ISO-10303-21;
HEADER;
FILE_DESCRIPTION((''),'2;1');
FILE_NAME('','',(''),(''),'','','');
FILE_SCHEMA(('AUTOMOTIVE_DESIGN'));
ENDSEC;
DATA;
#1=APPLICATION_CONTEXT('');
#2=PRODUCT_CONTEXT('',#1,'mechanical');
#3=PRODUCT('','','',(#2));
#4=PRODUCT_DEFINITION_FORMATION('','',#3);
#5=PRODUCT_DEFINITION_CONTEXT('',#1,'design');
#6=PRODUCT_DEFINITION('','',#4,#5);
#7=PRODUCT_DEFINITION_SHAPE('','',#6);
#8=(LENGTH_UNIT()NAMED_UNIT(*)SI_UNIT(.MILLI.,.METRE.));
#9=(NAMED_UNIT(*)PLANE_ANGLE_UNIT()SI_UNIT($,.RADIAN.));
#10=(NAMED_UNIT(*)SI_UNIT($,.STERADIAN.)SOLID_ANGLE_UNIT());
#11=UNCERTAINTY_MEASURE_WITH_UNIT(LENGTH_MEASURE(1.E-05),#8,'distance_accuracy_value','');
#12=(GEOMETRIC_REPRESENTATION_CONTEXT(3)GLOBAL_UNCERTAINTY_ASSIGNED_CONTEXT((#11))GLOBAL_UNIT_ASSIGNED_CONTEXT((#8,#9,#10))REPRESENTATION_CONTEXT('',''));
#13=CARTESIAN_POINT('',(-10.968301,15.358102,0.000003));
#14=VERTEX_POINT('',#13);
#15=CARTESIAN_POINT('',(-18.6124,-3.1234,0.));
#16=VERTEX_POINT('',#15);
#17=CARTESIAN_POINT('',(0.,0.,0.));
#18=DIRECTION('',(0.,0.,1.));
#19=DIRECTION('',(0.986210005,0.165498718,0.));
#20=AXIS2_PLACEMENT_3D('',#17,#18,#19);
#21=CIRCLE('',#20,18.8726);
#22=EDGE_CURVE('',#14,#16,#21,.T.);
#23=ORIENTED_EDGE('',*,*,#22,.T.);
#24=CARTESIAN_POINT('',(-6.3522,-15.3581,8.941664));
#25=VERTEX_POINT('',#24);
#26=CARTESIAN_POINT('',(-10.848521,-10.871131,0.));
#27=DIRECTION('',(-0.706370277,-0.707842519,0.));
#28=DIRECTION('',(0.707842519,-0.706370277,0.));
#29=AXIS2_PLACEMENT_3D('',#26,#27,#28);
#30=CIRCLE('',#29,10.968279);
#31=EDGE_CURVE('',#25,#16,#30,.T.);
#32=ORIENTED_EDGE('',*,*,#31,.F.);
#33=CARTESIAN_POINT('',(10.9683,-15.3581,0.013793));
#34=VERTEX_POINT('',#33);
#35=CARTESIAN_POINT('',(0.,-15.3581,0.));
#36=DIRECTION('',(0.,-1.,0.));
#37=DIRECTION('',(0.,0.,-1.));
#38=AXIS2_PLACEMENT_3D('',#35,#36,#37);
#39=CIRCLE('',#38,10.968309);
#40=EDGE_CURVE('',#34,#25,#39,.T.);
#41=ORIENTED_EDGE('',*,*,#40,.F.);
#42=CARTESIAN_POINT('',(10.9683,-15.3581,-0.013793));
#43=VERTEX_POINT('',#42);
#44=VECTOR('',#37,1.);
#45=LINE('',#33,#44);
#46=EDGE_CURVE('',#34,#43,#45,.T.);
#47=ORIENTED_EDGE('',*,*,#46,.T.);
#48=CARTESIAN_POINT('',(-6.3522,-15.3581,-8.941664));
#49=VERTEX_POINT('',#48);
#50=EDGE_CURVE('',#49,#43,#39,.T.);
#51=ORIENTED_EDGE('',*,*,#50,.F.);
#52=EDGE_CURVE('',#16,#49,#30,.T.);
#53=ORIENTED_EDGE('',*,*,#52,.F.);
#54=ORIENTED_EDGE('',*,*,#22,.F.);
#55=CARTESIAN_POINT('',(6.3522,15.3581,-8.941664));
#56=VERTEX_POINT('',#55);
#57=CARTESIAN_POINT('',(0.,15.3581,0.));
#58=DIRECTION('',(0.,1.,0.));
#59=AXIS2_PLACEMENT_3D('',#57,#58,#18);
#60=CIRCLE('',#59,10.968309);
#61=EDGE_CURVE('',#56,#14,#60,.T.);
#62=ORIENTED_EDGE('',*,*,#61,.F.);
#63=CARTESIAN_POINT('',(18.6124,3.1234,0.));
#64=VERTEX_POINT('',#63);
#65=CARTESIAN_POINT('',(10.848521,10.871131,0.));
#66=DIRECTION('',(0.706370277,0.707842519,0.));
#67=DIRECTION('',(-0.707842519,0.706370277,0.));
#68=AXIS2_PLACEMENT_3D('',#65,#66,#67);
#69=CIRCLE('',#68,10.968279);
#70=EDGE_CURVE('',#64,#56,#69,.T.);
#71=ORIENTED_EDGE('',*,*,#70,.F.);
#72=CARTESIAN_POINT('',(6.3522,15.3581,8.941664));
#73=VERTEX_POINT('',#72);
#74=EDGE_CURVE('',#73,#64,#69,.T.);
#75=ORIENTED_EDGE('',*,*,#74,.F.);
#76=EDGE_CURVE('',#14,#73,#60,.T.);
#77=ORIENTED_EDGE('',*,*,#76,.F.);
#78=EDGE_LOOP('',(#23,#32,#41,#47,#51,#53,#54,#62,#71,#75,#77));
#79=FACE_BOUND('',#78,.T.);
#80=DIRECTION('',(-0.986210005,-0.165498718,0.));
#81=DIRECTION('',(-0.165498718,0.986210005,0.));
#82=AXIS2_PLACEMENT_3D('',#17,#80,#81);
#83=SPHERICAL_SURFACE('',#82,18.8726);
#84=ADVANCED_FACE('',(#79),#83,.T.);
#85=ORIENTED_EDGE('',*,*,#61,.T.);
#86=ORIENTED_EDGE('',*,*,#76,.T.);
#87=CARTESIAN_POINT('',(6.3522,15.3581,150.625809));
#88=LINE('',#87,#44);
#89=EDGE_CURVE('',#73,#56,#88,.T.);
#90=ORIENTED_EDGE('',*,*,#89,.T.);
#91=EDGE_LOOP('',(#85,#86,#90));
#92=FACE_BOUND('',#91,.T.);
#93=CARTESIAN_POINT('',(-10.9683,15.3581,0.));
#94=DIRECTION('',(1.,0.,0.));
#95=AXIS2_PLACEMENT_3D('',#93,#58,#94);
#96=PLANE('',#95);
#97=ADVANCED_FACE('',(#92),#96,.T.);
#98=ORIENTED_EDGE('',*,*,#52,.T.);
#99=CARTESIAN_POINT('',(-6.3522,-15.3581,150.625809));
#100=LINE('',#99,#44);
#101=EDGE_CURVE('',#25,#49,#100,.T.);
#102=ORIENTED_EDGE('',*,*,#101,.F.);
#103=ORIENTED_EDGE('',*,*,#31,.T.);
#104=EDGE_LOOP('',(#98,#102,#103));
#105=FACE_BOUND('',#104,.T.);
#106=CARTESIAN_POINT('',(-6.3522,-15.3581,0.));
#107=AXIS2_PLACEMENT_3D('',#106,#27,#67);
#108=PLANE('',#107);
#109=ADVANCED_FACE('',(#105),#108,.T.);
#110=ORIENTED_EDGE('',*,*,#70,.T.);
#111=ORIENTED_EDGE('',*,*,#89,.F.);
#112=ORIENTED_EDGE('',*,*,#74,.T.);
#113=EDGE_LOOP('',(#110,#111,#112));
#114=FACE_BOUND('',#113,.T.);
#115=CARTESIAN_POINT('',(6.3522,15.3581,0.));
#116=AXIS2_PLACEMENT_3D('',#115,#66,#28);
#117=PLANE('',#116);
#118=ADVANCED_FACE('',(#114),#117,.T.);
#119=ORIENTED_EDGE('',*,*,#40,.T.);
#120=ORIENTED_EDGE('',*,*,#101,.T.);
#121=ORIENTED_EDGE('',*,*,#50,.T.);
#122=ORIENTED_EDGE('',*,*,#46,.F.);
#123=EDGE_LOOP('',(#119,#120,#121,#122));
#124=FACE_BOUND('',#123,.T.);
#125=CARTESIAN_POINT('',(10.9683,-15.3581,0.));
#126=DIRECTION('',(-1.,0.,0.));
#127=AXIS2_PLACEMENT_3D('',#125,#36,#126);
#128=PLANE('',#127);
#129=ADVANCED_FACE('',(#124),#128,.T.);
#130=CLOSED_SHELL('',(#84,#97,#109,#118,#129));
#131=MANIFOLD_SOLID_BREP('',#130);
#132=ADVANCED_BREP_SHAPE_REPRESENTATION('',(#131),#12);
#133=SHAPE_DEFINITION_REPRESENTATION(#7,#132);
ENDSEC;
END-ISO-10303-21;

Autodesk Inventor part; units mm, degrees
ref_plane "YZ Plane" through (0, 0, 0) normal (1, 0, 0) x (0, 1, 0)
ref_plane "XZ Plane" through (0, 0, 0) normal (0, 1, 0) x (-1, 0, 0)
ref_plane "XY Plane" through (0, 0, 0) normal (0, 0, 1) x (1, 0, 0)
sketch "Sketch12" plane through (0, 0, 0) normal (0, 0, 1) x (1, 0, 0)
  line L0 (10.9683, -15.3581) -> (-6.3522, -25.3581) construction
  line L1 (-6.3522, -25.3581) -> (-6.3522, -5.3581) construction
  line L2 (-6.3522, -5.3581) -> (10.9683, -15.3581) construction
  circle A0 centre (0, 0) radius 18.8726
  line L3 (-18.6124, -3.1234) -> (-10.9683, 15.3581)
  line L4 (-10.9683, 15.3581) -> (6.3522, 15.3581)
  line L5 (6.3522, 15.3581) -> (18.6124, 3.1234)
  line L6 (10.9683, -15.3581) -> (18.6124, 3.1234)
  line L7 (10.9683, -15.3581) -> (-6.3522, -15.3581)
  line L8 (-6.3522, -15.3581) -> (-18.6124, -3.1234)
  line L9 (-18.6124, -3.1234) -> (18.6124, 3.1234)
  dimension "d49" = 20
  dimension "d36" = 20
revolve "Revolution2" add sketch "Sketch12" angle 360 about axis through (-18.6124, -3.1234, 0) along (0.9862099, 0.1654995, 0) contours L5 L4 A0 | L9 L3 L4 L5 | L3 A0
extrude "Extrusion6" cut sketch "Sketch12" along normal through all both and the other way through all contours L5 L4 A0 | A0 L8 L7
properties part number "D20-2"
